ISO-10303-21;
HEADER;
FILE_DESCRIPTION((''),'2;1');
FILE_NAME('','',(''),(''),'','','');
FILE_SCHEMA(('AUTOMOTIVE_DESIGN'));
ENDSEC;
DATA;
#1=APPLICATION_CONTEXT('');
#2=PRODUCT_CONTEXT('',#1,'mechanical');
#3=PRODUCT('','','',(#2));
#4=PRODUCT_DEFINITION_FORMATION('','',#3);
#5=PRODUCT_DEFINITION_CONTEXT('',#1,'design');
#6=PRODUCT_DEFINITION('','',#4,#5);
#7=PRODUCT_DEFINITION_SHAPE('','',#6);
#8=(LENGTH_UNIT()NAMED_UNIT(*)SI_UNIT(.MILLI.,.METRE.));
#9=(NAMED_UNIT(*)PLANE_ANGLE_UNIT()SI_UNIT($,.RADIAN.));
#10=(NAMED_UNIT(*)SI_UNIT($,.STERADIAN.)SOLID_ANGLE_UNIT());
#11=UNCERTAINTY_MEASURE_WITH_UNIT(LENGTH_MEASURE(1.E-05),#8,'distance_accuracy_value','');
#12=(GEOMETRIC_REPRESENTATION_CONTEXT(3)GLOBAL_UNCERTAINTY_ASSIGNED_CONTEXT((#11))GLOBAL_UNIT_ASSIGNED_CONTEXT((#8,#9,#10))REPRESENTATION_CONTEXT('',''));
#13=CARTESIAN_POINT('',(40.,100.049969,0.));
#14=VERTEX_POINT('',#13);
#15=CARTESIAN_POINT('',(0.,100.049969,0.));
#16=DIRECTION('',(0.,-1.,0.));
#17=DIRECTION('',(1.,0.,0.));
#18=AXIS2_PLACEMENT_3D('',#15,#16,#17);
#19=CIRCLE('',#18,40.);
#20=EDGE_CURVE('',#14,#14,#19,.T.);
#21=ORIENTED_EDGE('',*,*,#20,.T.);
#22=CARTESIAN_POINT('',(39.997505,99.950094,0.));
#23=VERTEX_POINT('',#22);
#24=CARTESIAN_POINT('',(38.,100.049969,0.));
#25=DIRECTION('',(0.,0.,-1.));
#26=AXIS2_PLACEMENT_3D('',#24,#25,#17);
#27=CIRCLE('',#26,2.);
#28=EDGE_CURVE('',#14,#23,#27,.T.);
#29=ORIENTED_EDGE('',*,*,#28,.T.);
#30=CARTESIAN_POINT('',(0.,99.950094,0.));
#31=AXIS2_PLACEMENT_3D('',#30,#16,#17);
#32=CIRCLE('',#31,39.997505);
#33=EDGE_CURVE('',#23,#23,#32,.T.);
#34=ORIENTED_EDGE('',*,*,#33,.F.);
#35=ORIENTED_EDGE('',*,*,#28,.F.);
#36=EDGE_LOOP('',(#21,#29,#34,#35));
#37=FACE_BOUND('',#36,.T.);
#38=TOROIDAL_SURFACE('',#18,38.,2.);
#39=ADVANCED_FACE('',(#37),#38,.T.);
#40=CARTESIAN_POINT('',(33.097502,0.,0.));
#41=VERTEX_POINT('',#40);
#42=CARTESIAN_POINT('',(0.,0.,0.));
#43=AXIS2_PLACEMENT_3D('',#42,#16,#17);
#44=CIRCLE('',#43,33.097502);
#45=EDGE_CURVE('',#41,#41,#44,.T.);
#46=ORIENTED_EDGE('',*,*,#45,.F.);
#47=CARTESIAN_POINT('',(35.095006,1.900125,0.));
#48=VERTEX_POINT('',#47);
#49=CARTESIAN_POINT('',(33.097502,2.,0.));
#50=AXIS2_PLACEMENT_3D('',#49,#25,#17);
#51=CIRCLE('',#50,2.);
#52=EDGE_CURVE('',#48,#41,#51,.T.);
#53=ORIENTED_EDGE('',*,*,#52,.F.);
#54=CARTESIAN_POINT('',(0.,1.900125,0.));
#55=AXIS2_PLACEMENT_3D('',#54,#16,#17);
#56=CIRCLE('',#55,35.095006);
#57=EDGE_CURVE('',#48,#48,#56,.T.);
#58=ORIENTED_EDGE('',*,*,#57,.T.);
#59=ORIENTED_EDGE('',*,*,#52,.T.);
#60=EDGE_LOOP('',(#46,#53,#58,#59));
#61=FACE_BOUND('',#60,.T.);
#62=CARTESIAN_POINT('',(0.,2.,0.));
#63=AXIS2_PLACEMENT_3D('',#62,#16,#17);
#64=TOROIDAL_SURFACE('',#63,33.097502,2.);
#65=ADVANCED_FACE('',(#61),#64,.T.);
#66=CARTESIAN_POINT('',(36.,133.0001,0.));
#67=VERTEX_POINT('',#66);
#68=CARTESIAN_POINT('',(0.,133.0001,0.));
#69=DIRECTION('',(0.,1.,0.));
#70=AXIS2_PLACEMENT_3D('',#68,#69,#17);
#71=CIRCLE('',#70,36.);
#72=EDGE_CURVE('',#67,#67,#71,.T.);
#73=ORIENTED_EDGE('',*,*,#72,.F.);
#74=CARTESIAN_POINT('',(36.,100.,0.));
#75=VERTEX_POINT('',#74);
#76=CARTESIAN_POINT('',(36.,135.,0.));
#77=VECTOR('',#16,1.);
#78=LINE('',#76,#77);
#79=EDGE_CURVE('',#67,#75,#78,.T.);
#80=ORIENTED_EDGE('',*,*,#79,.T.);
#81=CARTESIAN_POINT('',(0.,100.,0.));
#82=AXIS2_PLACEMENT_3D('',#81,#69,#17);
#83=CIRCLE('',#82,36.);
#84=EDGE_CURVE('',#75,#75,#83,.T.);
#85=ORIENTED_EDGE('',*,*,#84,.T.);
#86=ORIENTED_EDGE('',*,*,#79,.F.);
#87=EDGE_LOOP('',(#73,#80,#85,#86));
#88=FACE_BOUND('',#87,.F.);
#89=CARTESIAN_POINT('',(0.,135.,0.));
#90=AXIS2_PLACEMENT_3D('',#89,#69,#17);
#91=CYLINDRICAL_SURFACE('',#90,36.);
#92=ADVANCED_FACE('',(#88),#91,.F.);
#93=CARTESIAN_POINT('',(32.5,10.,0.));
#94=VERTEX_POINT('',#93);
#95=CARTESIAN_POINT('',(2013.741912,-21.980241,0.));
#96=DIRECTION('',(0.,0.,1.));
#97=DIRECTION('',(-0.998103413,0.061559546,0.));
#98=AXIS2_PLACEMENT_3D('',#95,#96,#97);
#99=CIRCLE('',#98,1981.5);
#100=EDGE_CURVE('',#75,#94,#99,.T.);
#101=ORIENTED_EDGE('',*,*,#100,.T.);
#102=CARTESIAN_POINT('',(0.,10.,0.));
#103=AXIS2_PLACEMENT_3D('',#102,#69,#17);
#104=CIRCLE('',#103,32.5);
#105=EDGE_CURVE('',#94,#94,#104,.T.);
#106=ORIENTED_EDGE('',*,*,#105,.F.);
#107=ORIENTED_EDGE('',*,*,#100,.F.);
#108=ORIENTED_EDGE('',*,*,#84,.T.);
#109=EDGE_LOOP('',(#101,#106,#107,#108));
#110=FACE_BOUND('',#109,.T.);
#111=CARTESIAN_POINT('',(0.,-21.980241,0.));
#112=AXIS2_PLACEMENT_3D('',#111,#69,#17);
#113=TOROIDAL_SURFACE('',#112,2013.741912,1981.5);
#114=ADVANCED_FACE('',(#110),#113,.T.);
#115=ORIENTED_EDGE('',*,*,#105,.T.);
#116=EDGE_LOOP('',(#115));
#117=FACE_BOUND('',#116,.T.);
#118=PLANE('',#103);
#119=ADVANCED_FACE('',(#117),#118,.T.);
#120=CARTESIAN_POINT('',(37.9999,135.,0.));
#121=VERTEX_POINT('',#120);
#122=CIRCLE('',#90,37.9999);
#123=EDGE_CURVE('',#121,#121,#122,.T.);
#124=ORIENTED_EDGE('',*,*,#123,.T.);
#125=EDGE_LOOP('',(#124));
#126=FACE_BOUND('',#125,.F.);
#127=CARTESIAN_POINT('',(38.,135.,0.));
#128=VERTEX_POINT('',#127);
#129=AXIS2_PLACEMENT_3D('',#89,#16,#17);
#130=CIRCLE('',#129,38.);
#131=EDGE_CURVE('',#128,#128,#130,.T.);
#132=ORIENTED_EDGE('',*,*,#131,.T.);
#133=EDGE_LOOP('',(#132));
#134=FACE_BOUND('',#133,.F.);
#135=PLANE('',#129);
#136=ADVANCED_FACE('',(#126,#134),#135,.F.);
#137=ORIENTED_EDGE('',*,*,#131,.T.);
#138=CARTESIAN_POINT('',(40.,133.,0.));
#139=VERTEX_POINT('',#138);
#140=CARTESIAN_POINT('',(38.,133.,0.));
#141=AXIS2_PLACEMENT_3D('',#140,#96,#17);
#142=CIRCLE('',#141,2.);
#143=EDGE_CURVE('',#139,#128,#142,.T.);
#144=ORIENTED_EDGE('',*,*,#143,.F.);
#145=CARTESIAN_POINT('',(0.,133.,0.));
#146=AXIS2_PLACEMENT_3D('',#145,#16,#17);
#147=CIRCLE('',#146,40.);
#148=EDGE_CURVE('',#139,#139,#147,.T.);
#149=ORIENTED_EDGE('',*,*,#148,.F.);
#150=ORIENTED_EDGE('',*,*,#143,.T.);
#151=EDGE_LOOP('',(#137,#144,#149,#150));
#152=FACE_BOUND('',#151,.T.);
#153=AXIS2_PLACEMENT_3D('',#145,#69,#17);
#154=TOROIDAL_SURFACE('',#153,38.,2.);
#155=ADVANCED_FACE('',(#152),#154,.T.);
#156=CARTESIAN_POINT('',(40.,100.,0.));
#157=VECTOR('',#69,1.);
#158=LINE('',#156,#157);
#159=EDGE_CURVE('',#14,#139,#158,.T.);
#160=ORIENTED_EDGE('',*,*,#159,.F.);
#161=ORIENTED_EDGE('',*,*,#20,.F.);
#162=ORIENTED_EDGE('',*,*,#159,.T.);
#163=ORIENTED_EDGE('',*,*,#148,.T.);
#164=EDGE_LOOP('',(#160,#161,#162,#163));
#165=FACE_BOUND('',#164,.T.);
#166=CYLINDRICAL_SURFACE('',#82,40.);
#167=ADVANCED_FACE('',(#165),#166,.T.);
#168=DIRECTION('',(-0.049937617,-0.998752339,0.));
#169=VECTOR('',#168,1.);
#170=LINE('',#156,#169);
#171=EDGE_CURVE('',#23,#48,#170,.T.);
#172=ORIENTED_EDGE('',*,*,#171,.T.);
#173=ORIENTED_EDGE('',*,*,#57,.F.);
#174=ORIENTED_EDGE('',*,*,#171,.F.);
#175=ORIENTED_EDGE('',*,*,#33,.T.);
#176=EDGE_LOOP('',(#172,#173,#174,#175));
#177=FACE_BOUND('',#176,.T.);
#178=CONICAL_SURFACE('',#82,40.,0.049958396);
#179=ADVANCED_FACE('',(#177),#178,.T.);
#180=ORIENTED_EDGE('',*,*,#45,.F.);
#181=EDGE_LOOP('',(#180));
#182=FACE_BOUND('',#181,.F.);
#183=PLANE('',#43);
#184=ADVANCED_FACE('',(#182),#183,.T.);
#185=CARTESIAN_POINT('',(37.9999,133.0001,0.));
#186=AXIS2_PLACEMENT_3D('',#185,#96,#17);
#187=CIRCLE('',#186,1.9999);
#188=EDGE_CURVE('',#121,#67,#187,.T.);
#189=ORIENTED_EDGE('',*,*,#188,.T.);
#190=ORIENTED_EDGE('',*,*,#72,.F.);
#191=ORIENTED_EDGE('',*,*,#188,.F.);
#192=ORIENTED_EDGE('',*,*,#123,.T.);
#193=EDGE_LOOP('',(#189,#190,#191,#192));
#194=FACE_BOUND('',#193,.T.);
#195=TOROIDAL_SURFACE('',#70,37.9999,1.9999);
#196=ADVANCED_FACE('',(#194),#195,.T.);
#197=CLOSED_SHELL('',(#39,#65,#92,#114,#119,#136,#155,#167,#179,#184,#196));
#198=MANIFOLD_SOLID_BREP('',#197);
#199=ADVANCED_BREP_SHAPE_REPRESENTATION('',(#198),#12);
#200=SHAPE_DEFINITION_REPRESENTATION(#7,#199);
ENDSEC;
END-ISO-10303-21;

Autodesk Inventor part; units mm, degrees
ref_plane "YZ Plane" through (0, 0, 0) normal (1, 0, 0) x (0, 1, 0)
ref_plane "XZ Plane" through (0, 0, 0) normal (0, 1, 0) x (-1, 0, 0)
ref_plane "XY Plane" through (0, 0, 0) normal (0, 0, 1) x (1, 0, 0)
sketch "Boceto1" plane through (0, 0, 0) normal (0, 0, 1) x (1, 0, 0)
  line L0 (0, 0) -> (35, 0)
  line L1 (40, 100) -> (35, 0)
  line L2 (40, 100) -> (40, 135)
  line L3 (40, 135) -> (0, 135)
  line L4 (0, 135) -> (0, 0)
  dimension "d0" = 35
sketch "Boceto2" plane through (0, 0, 0) normal (0, 0, 1) x (1, 0, 0)
  point P0 (0, 0)
revolve "Revolución1" add sketch "Boceto1" angle 360 about axis through (0, 135, 0) along (0, -1, 0)
fillet "Empalme1" radius 2 1 edges at (-35, 0, 0)
fillet "Empalme2" radius 2 1 edges at (-40, 135, 0)
fillet "Empalme3" radius 2 1 edges at (-40, 100, 0)
sketch "Boceto3" plane through (0, 135, 0) normal (0, 1, 0) x (1, 0, 0)
  circle A0 centre (0, 0) radius 32.5
  dimension "d8" = 65
extrude "Extrusión1" cut sketch "Boceto3" against normal blind 125
sketch "Boceto4" plane through (0, 135, 0) normal (0, 1, 0) x (1, 0, 0)
  circle A0 centre (0, 0) radius 36
  dimension "d11" = 72
extrude "Extrusión2" cut sketch "Boceto4" against normal blind 35
fillet "Empalme4" radius 2 1 edges at (-36, 135, 0)
fillet "Empalme5" radius 1981.5 1 edges at (-32.5, 100, 0)
properties part number "Coctelera"
